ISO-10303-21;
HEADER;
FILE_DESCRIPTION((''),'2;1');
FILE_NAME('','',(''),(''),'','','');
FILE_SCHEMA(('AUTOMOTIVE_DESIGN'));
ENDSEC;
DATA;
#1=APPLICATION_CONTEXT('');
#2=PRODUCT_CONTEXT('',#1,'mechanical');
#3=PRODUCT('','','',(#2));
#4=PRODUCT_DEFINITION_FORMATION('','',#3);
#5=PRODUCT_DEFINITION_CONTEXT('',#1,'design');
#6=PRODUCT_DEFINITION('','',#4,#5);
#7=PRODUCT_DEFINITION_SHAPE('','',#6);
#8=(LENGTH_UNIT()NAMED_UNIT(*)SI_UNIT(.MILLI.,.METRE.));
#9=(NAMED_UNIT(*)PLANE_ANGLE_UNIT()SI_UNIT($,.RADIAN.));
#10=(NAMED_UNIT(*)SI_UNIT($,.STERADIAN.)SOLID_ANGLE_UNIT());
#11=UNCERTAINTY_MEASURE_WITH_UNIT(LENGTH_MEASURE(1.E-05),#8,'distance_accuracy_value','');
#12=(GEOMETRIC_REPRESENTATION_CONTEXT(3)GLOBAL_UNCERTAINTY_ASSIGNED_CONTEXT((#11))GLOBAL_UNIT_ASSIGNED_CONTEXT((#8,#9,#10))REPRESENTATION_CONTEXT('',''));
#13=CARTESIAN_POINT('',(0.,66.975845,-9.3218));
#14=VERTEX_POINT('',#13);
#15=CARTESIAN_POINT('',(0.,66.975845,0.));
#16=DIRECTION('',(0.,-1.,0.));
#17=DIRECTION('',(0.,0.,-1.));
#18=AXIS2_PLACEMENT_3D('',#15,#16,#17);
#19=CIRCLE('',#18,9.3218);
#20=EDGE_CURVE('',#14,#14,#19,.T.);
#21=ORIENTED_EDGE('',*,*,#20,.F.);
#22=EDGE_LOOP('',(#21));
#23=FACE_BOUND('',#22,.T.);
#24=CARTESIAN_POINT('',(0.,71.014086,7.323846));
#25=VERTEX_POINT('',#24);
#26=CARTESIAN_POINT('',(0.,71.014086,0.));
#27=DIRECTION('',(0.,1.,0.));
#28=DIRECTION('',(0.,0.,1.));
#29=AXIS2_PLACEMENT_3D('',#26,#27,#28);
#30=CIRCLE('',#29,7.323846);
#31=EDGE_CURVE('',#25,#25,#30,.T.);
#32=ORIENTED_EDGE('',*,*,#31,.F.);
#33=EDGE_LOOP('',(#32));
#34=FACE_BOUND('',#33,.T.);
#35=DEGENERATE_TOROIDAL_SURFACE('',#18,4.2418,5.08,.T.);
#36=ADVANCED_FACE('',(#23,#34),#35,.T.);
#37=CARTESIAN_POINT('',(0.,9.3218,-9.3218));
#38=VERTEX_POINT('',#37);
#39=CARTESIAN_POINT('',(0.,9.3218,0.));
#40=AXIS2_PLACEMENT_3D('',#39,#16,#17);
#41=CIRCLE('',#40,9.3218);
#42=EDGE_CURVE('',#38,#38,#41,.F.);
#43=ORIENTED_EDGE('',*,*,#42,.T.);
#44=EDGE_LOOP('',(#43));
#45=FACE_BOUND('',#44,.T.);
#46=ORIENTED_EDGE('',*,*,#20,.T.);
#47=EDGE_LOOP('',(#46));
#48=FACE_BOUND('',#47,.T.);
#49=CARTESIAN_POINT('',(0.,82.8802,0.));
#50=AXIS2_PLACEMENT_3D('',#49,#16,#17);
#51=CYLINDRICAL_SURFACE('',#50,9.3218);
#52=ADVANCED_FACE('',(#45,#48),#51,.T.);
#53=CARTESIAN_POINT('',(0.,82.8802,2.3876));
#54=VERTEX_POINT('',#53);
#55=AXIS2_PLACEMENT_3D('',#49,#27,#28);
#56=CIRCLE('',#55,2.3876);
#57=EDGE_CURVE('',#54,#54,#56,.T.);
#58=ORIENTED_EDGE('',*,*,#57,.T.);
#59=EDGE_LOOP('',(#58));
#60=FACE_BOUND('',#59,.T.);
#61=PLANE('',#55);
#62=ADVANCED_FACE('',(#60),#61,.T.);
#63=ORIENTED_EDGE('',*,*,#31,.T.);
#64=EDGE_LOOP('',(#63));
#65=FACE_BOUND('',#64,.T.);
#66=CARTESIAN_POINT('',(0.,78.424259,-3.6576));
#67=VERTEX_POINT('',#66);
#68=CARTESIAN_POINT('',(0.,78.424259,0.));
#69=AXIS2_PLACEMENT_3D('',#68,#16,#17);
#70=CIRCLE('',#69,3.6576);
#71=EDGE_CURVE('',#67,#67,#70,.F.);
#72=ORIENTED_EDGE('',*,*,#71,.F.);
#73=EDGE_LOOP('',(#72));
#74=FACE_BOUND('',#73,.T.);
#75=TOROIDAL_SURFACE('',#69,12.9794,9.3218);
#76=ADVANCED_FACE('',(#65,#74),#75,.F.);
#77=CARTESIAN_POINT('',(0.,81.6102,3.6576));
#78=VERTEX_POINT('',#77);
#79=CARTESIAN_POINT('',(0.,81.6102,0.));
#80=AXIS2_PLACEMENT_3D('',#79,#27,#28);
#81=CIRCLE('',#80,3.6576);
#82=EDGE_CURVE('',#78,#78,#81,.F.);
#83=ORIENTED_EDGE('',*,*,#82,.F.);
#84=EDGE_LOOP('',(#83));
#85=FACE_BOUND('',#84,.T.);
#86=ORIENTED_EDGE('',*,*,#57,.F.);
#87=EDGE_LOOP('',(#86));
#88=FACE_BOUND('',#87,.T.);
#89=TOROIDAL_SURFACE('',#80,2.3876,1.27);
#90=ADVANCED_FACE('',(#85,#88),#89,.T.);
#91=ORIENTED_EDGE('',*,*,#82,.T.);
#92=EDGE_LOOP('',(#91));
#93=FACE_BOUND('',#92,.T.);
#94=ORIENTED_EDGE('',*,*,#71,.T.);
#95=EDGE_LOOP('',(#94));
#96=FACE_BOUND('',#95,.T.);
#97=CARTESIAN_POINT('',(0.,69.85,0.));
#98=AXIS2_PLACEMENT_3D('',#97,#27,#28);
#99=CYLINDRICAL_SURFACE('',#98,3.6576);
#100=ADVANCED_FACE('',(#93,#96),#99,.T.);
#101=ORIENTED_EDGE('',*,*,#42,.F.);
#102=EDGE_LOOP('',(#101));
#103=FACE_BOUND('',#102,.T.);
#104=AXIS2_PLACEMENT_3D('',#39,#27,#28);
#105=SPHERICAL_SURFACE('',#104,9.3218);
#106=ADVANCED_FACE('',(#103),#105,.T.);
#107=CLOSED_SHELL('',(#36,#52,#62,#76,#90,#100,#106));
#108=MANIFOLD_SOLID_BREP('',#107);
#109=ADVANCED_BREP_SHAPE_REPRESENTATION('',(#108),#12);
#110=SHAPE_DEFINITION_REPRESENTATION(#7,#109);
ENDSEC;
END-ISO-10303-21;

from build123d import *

# Parameters (mm, degrees)
SKETCH2_R           = 9.3218
BOSS_EXTRUDE1_DEPTH = 82.8802
FILLET1_R           = 9.3218
CUT_EXTRUDE1_START  = -13.0302
SKETCH3_R           = 9.3218
SKETCH3_R_2         = 3.6576
CUT_EXTRUDE1_DEPTH  = 13.0302
FILLET2_R           = 9.3218
FILLET3_R           = 5.08
FILLET5_R           = 1.27


with BuildPart() as part:
    # Sketch2 → Boss-Extrude1 (new body)
    with BuildSketch(Plane(origin=(0, 0, 0), x_dir=(1, 0, 0), z_dir=(0, 1, 0))):
        with Locations(Location((0, 0, 0), (0, 0, 270))):
            Circle(SKETCH2_R)
    extrude(amount=BOSS_EXTRUDE1_DEPTH)

    # Fillet1
    fillet1_edges = [part.edges().sort_by_distance(p)[0] for p in [
        (0, 0, -9.3218),
    ]]
    fillet(fillet1_edges, radius=FILLET1_R)

    # Sketch3 → Cut-Extrude1 (cut)
    with BuildSketch(Plane(origin=(0, 82.8802, 0), x_dir=(1, 0, 0), z_dir=(0, 1, 0)).offset(CUT_EXTRUDE1_START)):
        with Locations(Location((0, 0, 0), (0, 0, 90))):
            Circle(SKETCH3_R)
        with Locations(Location((0, 0, 0), (0, 0, 270))):
            Circle(SKETCH3_R_2, mode=Mode.SUBTRACT)
    extrude(amount=CUT_EXTRUDE1_DEPTH, mode=Mode.SUBTRACT)

    # Fillet2
    # the kernel refuses this fillet: 9.3218 mm, written as the material it adds along each edge
    with BuildSketch(Plane(origin=(0, 69.85, 0), x_dir=(0, 0, 1), z_dir=(-1, 0, 0))) as fillet2_piece_1:
        with BuildLine():
            CenterArc((12.9794, 8.574259005), FILLET2_R, 180, 66.897916031)
            Line((3.6576, 8.574259005), (3.471164, 8.574259005))
            Line((3.471164, 8.574259005), (3.471164, 0))
            Line((3.471164, 0), (3.6576, -0.186436))
            ThreePointArc((3.6576, -0.186436), (6.4897, -0.186436), (9.248648, -0.17148518))
            Line((9.248648, -0.17148518), (9.3218, 0))
        make_face()
    revolve(axis=Axis((0, 69.85, 0), (0, 1, 0)))

    # Fillet3
    fillet3_edges = [part.edges().sort_by_distance(p)[0] for p in [
        (0, 69.85, -9.3218),
    ]]
    fillet(fillet3_edges, radius=FILLET3_R)

    # Fillet5
    fillet5_edges = [part.edges().sort_by_distance(p)[0] for p in [
        (0, 82.8802, -3.6576),
    ]]
    fillet(fillet5_edges, radius=FILLET5_R)


solid = part.part
